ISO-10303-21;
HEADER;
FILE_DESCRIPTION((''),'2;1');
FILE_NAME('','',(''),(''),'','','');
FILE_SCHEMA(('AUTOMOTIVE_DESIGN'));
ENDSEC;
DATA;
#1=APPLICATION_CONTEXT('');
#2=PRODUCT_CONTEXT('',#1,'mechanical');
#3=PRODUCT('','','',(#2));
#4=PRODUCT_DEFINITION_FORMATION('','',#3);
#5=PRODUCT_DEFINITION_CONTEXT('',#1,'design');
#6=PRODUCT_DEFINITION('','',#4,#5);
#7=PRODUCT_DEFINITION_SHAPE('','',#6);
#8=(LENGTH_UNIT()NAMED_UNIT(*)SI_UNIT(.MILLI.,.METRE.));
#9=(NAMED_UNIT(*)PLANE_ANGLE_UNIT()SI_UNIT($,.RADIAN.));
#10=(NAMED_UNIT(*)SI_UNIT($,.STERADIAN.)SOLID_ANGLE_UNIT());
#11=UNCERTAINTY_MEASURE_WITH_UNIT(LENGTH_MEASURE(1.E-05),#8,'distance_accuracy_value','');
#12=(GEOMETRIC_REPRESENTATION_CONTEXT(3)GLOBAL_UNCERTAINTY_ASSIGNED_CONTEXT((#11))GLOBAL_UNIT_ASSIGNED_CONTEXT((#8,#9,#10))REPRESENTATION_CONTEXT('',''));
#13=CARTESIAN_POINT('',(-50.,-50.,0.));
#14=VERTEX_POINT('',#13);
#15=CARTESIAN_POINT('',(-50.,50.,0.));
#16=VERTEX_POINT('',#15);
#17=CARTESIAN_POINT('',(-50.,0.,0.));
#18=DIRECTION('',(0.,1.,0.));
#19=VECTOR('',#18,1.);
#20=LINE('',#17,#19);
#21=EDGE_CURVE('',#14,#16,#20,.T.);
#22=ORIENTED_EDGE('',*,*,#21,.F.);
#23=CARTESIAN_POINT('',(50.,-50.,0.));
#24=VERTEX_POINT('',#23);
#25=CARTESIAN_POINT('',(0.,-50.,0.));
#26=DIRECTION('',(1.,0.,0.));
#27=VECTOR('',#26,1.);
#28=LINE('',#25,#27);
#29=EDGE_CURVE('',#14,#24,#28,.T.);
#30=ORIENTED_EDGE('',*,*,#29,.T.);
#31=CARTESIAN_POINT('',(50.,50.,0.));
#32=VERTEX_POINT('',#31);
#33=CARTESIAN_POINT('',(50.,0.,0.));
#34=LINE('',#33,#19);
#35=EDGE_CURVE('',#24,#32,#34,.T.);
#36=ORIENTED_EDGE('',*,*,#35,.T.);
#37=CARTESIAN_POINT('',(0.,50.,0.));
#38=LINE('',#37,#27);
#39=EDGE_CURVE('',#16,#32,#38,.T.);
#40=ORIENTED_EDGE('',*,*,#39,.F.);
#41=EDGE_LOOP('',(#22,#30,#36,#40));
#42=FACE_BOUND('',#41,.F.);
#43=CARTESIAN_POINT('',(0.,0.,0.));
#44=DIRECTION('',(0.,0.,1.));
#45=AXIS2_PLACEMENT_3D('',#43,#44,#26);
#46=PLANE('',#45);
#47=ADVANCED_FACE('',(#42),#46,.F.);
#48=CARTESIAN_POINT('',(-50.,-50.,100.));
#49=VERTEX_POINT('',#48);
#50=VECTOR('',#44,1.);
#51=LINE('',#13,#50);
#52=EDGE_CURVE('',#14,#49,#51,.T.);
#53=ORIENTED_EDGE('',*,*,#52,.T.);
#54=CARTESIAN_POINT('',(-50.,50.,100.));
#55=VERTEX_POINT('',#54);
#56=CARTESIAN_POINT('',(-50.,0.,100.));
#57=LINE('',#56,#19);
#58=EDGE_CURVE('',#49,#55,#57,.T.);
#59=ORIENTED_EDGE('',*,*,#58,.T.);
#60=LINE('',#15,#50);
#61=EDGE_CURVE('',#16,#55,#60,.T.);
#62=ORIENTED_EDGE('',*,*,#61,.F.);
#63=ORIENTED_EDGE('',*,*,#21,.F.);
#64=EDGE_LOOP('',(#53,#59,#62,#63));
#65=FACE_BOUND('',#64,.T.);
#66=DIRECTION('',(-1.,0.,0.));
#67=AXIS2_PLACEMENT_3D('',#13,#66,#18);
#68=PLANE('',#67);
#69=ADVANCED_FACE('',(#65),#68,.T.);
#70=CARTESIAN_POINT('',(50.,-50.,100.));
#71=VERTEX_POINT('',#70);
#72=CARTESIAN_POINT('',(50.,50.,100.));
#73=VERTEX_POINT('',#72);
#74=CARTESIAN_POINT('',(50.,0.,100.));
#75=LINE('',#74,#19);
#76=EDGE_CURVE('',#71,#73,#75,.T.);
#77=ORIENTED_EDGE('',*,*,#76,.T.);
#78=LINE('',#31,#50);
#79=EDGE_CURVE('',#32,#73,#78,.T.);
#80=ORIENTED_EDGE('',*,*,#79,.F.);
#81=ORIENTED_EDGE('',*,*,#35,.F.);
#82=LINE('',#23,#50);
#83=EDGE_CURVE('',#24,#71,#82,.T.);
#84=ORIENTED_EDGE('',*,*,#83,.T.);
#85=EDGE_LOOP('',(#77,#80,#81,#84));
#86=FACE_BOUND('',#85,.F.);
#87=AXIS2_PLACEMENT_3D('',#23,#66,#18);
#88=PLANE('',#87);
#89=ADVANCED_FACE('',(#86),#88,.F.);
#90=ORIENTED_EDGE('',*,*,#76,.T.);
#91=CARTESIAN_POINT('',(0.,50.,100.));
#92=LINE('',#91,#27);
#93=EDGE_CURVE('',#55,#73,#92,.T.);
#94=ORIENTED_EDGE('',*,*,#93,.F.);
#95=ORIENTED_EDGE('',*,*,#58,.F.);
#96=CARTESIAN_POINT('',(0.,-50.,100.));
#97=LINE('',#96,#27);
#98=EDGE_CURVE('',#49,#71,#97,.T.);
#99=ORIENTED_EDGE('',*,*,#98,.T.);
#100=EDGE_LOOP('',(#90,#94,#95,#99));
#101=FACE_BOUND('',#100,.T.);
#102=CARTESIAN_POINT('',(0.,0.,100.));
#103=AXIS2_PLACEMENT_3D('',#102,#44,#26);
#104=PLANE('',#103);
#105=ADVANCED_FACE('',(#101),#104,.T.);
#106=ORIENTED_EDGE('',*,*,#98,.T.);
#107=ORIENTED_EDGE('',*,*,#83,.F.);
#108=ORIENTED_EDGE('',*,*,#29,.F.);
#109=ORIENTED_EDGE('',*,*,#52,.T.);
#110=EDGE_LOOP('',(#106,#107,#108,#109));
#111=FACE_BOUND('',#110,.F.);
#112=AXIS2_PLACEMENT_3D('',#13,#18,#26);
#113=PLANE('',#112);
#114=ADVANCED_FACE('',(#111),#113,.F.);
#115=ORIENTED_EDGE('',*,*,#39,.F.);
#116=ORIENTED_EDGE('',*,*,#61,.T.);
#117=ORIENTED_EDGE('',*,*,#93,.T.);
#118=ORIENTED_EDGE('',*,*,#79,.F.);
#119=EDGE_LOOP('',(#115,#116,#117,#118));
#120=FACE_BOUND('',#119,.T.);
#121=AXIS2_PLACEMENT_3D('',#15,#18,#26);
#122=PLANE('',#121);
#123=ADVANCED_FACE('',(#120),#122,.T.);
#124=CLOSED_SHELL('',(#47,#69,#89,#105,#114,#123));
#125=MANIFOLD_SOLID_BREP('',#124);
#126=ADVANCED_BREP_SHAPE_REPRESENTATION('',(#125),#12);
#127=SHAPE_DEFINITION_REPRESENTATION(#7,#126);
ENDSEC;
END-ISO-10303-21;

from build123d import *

# Parameters (mm, degrees)
F0_W     = 100
F0_H     = 100
F1_DEPTH = 100


# Not quite as in the source:
# - a feature of the source that left no trace in its solid (it failed there, or was rolled back) is left out


with BuildPart() as f1:
    # F0 (on Top) → F1 (new body)
    with BuildSketch(Plane.XY):
        Rectangle(F0_W, F0_H)
    extrude(amount=F1_DEPTH)


solid = f1.part
